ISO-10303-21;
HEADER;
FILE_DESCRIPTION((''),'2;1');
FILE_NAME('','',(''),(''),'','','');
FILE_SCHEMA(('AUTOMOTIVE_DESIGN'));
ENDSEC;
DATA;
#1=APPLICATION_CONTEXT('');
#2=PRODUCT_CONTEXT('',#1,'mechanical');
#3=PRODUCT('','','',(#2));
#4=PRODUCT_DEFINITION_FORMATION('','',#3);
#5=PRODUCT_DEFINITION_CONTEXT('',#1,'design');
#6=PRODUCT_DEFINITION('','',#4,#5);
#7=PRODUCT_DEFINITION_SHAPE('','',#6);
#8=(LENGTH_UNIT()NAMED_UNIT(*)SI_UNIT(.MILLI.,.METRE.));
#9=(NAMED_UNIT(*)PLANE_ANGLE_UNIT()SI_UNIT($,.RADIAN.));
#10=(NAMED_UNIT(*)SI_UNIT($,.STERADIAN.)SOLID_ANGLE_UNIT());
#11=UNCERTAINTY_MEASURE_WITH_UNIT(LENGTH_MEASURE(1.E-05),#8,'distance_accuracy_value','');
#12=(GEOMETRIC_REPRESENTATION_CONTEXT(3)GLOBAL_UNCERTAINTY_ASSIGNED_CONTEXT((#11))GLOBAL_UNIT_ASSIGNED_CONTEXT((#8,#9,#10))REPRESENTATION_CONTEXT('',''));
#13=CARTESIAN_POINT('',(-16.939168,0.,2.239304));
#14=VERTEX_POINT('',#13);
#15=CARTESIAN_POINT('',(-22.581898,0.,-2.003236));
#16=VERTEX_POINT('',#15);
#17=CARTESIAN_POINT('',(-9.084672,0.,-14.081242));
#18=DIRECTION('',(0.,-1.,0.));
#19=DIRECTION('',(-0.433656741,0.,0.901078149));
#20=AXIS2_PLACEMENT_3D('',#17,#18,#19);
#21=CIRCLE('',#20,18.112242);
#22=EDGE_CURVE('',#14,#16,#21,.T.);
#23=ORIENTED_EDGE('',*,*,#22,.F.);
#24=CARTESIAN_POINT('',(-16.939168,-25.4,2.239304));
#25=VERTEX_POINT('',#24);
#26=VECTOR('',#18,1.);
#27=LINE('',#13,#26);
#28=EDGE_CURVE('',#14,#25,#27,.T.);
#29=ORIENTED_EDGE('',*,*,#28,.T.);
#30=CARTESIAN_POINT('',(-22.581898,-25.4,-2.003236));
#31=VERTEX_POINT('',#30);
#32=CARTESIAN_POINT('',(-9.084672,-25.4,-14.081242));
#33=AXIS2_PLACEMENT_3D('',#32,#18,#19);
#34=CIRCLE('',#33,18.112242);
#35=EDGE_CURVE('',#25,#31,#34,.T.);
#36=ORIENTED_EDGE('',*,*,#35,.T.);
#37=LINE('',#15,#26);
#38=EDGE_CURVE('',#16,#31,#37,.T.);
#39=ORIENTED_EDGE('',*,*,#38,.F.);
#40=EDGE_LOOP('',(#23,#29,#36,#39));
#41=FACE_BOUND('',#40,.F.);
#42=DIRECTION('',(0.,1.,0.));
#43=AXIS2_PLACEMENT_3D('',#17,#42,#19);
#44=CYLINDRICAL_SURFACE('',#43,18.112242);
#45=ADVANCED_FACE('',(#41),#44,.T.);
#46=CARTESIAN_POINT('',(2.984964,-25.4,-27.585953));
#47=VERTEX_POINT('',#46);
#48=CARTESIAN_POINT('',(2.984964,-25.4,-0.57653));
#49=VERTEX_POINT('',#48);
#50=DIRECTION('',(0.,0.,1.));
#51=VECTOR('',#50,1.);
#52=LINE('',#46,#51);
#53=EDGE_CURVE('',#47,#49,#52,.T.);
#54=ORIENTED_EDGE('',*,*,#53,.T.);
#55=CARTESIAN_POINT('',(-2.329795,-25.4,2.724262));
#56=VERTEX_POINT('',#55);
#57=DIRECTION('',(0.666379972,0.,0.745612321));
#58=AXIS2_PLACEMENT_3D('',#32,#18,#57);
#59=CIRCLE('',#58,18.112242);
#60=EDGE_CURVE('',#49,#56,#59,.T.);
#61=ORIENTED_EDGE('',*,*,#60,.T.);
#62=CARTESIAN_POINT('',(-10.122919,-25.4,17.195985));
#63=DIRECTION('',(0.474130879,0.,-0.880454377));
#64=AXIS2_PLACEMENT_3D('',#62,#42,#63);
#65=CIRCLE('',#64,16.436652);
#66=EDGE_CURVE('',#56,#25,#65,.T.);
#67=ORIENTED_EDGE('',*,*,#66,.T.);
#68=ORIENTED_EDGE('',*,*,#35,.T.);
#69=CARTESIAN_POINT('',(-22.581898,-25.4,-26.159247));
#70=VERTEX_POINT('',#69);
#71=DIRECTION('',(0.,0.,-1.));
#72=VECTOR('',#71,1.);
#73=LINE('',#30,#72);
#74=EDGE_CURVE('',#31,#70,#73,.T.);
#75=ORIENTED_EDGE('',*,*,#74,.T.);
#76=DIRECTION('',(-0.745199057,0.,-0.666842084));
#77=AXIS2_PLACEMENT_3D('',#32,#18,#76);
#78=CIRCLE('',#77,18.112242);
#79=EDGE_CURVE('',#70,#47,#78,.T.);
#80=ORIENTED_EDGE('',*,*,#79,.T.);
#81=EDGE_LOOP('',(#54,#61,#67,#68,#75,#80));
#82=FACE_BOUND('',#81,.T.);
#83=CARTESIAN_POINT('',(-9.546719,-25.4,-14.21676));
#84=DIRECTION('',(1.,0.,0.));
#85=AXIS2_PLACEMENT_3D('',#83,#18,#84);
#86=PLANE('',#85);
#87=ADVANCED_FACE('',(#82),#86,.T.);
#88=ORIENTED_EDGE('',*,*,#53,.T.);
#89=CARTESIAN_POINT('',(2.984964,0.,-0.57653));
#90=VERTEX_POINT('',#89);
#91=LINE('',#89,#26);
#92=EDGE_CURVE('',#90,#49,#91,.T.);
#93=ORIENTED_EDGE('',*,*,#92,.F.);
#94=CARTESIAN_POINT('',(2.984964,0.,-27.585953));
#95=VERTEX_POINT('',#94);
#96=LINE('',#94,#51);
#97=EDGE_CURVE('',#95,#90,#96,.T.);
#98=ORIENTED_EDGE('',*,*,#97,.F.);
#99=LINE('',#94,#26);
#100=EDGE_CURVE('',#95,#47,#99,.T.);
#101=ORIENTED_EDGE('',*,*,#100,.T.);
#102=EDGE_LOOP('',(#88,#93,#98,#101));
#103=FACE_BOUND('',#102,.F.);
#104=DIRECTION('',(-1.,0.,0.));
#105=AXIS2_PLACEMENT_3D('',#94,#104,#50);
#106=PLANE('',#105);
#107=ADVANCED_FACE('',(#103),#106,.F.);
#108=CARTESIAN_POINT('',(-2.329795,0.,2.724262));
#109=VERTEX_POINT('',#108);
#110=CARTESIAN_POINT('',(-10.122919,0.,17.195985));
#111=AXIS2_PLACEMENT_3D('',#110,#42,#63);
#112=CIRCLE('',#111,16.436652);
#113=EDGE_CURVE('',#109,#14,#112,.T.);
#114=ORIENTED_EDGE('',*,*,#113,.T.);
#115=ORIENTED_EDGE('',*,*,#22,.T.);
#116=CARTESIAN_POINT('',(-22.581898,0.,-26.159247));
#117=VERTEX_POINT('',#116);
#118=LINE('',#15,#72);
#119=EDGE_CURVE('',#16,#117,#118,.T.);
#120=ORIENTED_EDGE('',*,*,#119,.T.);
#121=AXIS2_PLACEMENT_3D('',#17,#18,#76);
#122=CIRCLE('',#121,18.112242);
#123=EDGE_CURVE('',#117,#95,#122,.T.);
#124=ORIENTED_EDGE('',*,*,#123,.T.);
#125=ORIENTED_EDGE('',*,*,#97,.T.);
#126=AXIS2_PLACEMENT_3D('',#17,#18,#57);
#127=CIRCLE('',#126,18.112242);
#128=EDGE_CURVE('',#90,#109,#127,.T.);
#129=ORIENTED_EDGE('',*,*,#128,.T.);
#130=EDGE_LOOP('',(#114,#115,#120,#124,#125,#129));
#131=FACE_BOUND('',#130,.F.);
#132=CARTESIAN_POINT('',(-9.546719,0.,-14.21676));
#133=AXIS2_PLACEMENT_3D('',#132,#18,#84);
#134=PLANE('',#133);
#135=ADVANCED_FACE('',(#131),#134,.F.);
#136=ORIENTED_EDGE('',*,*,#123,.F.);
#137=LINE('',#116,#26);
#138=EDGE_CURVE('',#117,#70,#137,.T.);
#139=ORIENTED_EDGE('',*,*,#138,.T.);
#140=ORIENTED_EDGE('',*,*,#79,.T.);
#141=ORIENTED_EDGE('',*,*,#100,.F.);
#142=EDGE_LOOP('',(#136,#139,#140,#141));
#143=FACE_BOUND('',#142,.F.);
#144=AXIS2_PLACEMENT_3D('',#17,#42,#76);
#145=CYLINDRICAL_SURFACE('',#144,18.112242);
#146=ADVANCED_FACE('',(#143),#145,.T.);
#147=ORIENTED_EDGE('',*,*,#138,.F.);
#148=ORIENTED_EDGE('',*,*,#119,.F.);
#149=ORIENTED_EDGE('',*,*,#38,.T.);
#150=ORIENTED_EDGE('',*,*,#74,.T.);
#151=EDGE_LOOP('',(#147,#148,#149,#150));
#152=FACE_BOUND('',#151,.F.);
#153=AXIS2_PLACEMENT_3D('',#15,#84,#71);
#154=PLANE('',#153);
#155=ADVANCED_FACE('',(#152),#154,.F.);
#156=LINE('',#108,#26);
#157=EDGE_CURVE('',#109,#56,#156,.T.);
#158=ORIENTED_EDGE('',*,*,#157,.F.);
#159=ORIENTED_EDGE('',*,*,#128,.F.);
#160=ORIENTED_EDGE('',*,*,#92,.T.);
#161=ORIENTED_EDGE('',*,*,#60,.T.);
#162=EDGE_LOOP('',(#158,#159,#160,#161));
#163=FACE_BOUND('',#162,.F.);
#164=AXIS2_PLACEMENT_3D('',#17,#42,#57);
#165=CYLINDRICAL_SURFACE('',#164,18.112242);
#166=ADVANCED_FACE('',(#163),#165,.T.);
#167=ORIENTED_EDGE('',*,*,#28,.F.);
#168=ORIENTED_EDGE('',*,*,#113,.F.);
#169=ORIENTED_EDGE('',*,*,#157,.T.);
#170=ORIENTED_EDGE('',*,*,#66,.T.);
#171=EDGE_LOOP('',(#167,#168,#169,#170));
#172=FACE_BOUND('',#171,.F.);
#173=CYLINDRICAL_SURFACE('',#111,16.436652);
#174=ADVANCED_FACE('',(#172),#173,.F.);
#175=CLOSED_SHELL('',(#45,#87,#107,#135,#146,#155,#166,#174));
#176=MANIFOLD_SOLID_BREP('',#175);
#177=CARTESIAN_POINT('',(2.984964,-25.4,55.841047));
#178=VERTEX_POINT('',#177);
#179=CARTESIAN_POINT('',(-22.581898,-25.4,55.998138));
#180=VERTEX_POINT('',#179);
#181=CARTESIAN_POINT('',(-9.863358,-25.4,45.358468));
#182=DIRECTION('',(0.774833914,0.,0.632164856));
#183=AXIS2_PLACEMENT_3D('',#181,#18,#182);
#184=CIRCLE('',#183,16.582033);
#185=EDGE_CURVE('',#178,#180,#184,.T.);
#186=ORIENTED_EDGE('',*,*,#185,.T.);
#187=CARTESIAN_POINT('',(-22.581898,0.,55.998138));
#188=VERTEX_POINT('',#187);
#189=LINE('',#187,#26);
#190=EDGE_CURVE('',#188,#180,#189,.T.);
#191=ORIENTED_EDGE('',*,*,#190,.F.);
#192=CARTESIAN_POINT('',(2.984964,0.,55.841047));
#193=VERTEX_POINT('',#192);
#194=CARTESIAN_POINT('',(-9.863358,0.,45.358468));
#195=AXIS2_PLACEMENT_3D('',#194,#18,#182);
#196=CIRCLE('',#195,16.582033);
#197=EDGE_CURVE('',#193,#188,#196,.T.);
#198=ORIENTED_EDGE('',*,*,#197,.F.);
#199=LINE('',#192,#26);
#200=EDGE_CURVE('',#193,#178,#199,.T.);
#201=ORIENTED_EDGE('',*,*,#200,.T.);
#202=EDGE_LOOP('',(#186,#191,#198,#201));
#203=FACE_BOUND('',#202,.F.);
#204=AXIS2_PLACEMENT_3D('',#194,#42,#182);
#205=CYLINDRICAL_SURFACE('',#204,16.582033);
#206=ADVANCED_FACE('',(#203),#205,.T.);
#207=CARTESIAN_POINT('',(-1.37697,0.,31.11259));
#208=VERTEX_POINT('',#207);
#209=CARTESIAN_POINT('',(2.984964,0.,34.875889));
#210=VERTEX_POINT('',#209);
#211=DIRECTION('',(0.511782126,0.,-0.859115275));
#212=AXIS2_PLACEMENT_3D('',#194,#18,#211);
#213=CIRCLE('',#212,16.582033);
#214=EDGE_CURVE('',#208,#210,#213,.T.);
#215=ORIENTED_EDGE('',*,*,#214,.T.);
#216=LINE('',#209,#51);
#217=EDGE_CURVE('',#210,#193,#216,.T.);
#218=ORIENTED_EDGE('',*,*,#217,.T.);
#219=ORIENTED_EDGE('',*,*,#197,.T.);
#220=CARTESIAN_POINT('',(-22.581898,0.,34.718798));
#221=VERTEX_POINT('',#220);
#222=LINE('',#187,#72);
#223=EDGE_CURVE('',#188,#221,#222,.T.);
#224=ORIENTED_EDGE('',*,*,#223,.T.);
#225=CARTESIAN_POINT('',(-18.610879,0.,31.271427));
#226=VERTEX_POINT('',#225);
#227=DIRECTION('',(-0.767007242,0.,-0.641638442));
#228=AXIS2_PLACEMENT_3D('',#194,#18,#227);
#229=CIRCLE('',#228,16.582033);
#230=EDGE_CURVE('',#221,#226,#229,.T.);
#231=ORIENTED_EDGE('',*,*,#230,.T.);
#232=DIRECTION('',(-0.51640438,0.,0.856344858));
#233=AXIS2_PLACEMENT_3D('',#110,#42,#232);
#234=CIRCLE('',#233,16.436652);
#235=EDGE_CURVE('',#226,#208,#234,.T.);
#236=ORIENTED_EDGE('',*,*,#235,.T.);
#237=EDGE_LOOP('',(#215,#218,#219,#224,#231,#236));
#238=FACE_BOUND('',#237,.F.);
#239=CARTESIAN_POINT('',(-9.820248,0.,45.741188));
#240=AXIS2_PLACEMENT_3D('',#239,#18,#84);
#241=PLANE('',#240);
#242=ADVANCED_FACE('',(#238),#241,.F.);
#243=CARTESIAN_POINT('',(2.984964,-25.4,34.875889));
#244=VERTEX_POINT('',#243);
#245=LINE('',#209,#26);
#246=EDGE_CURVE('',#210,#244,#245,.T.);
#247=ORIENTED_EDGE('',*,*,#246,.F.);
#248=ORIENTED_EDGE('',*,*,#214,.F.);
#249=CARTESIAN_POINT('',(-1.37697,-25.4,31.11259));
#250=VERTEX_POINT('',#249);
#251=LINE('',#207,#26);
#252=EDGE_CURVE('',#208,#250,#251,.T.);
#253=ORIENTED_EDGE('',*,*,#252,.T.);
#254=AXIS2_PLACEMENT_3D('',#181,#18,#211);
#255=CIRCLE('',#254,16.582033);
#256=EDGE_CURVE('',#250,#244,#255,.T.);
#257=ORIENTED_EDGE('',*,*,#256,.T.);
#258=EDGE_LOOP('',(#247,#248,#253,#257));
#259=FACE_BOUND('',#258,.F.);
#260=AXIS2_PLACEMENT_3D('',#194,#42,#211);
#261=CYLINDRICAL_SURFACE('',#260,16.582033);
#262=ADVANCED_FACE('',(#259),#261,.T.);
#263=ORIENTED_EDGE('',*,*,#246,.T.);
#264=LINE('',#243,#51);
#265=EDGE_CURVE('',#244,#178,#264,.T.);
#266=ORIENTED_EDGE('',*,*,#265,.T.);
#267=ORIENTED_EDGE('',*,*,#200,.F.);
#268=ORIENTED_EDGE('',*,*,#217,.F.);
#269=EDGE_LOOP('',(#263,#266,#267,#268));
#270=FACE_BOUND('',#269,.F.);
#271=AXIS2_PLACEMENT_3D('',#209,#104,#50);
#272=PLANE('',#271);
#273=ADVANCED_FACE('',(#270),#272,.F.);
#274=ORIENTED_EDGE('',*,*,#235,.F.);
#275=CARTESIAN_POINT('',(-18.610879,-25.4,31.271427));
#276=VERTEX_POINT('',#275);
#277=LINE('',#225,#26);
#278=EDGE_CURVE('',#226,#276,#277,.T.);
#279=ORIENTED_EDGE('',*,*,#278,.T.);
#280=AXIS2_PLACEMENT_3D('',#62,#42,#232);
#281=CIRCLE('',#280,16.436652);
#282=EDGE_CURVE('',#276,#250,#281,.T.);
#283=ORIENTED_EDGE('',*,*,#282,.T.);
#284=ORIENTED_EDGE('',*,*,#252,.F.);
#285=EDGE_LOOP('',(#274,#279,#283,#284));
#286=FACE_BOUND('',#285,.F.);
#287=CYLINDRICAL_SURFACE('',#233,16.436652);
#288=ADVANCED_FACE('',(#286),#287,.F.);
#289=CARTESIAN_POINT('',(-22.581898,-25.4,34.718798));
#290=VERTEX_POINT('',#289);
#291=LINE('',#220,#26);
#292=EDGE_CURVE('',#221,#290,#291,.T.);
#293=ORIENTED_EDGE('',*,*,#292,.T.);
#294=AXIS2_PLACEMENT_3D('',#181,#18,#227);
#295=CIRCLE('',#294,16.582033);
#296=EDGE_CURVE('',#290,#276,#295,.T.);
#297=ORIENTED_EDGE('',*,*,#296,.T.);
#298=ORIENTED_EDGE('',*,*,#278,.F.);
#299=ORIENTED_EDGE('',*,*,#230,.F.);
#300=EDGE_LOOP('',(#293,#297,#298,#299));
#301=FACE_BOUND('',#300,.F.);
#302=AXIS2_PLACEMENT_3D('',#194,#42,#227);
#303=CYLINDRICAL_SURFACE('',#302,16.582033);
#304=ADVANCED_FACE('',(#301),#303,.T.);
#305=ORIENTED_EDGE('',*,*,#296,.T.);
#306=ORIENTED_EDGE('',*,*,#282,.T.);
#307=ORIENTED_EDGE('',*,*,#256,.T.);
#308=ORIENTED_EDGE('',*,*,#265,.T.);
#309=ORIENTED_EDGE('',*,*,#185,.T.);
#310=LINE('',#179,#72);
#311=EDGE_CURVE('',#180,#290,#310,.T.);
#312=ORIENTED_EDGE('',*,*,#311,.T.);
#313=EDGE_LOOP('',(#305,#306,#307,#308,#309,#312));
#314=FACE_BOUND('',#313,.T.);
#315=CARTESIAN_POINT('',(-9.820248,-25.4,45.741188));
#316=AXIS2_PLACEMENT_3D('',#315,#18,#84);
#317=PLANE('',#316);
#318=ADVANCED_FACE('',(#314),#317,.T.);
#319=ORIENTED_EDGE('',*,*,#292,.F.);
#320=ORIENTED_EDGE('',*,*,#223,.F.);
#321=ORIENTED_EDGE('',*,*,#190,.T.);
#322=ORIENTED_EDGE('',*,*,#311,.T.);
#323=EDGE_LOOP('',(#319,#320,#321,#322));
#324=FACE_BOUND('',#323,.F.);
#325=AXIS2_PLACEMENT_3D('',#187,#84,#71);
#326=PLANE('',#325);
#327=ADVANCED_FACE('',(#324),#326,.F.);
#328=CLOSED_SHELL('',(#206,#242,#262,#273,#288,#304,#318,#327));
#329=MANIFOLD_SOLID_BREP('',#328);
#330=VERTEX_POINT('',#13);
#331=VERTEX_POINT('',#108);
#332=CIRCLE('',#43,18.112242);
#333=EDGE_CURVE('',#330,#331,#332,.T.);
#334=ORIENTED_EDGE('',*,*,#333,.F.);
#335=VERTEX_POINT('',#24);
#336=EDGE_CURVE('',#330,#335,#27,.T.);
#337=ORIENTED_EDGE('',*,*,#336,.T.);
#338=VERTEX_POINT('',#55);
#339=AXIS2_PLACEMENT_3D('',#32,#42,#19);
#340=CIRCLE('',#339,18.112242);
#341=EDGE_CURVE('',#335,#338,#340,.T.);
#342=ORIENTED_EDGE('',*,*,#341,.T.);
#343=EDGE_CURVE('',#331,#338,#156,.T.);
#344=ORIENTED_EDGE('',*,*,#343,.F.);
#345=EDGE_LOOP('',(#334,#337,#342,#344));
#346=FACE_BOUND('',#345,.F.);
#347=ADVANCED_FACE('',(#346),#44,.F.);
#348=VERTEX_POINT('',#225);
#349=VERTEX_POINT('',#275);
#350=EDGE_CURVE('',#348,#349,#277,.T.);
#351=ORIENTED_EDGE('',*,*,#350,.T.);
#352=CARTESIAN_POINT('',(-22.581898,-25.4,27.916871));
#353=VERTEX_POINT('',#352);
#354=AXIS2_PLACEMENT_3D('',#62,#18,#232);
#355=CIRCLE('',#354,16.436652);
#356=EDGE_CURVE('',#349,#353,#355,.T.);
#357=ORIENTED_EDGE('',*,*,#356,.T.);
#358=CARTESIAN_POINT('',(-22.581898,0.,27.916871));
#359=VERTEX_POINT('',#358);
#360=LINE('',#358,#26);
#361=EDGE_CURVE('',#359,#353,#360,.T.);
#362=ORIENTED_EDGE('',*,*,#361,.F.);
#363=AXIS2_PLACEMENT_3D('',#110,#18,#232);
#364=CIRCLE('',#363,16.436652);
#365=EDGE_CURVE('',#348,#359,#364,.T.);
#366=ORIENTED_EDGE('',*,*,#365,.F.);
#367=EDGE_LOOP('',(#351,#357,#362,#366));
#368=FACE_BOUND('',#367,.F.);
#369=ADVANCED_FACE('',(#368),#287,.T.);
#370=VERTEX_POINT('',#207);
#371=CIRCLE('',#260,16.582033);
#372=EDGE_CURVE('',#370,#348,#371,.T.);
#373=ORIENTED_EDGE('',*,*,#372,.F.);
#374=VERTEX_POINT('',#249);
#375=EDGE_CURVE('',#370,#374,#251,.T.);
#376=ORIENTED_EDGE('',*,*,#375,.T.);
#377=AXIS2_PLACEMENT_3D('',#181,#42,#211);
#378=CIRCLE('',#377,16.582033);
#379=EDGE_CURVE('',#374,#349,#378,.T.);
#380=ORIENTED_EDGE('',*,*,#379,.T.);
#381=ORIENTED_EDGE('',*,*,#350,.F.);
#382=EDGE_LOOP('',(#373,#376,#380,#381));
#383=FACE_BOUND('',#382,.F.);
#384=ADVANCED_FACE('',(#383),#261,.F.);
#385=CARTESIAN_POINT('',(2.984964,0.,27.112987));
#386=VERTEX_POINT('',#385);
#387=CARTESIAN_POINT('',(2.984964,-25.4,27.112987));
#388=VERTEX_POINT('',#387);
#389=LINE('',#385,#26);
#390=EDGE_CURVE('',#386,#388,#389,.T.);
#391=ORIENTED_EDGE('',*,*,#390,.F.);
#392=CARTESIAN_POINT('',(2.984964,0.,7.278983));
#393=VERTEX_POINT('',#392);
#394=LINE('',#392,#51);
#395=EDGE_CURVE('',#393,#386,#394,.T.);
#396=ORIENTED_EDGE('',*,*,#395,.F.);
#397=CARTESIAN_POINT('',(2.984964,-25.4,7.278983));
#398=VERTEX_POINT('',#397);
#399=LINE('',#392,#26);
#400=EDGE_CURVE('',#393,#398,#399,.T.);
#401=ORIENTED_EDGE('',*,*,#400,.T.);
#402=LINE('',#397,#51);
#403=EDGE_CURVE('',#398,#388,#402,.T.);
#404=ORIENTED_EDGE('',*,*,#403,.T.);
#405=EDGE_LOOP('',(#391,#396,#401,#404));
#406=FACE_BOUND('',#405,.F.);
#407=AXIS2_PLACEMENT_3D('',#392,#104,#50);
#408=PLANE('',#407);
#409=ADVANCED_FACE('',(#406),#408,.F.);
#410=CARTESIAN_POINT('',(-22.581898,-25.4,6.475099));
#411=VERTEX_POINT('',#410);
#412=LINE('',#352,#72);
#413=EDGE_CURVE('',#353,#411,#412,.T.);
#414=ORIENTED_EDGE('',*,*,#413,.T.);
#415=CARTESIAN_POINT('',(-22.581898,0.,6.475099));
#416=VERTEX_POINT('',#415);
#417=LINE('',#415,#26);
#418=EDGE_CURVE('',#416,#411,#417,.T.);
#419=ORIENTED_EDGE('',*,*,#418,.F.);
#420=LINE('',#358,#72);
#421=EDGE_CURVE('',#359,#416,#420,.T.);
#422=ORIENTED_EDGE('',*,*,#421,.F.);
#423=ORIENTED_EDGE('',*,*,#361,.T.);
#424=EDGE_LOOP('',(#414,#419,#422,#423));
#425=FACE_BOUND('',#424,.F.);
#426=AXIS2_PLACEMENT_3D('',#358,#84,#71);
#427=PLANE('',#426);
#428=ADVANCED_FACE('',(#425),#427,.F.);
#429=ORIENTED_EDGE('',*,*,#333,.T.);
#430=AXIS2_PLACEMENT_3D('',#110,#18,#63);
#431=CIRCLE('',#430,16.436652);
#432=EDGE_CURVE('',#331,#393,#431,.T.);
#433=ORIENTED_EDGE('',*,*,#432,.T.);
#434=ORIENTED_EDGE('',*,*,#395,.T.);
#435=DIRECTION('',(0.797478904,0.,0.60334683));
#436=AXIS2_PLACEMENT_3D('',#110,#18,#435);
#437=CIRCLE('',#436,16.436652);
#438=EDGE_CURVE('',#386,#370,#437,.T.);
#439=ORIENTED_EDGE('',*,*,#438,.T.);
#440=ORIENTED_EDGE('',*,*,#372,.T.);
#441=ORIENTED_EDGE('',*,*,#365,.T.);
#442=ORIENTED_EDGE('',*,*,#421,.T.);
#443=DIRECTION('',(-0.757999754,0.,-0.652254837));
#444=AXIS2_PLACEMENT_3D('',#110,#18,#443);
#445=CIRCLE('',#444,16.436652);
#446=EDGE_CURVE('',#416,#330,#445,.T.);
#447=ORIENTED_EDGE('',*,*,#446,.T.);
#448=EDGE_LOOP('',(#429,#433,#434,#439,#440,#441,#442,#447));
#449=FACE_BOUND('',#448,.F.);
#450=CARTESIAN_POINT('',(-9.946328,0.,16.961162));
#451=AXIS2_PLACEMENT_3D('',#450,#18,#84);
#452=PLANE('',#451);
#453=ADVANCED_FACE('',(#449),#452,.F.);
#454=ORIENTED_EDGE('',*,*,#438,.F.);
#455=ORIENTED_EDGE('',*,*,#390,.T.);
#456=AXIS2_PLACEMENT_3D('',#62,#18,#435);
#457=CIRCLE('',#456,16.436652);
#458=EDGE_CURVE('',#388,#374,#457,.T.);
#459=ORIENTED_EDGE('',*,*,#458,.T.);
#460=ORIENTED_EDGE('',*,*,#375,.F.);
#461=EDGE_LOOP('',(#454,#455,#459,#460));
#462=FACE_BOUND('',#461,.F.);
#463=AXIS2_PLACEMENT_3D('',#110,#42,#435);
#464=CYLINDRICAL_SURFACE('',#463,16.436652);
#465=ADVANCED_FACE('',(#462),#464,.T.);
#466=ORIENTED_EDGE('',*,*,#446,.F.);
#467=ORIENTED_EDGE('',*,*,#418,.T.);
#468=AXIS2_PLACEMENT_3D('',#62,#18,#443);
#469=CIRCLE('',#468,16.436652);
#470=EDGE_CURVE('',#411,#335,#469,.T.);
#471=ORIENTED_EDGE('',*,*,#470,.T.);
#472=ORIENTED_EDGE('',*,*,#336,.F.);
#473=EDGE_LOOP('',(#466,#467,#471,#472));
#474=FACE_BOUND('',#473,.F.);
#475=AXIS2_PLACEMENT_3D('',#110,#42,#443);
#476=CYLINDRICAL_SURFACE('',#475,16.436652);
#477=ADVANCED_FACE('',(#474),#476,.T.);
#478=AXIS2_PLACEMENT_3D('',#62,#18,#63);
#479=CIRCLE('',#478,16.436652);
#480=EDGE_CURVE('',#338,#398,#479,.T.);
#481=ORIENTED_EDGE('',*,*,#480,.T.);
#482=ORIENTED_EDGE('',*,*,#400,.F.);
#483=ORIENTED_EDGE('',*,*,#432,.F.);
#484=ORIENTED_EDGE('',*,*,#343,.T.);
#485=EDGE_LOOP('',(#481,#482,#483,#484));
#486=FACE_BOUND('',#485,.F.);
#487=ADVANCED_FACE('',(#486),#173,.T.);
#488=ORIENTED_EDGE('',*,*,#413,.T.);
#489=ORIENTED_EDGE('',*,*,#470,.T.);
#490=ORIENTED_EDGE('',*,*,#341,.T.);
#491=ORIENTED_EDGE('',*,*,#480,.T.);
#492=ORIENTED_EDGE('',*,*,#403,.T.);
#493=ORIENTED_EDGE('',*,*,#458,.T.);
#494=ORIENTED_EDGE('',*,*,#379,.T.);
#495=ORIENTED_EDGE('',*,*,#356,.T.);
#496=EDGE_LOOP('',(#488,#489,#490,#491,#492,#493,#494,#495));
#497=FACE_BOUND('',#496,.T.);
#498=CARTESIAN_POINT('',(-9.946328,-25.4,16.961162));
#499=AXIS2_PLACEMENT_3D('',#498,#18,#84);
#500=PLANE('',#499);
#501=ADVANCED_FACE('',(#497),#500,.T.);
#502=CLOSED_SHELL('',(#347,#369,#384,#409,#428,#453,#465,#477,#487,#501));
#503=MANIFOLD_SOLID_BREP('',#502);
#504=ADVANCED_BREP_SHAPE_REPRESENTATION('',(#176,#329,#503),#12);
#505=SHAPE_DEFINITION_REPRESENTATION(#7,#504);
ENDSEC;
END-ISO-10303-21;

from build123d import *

# Parameters (mm, degrees)
F1_DEPTH = 25.4


with BuildPart() as f1:
    # F0 (on Front) → F1 (new body)
    with BuildSketch(Plane.XZ):
        with BuildLine():
            ThreePointArc((2.9849638231, 55.841046589), (-9.7614743803, 61.9401882116), (-22.581897676, 55.9981378983))
            Line((-22.581897676, 55.9981378983), (-22.581897676, 34.7187977959))
            ThreePointArc((-22.581897676, 34.7187977959), (-20.7339157895, 32.8366946633), (-18.6108785729, 31.2714272002))
            ThreePointArc((-18.6108785729, 31.2714272002), (-9.9714363538, 33.6319387195), (-1.3769697054, 31.1125896929))
            ThreePointArc((-1.3769697054, 31.1125896929), (0.9686810311, 32.8033588814), (2.9849638231, 34.8758891053))
            Line((2.9849638231, 34.8758891053), (2.9849638231, 55.841046589))
        make_face()
    extrude(amount=F1_DEPTH)


with BuildPart() as f1b:
    # F0 (on Front) → F1, piece 2 (new body)
    with BuildSketch(Plane.XZ):
        with BuildLine():
            ThreePointArc((-18.6108785729, 31.2714272002), (-20.7298421272, 29.7521275364), (-22.581897676, 27.9168705362))
            Line((-22.581897676, 27.9168705362), (-22.581897676, 6.4750989062))
            ThreePointArc((-22.581897676, 6.4750989062), (-19.9904965776, 4.0508543415), (-16.9391677392, 2.2393042641))
            ThreePointArc((-16.9391677392, 2.2393042641), (-9.6855767528, 4.0210300271), (-2.3297951619, 2.7242624769))
            ThreePointArc((-2.3297951619, 2.7242624769), (0.5728460014, 4.7154345625), (2.9849638231, 7.2789828089))
            Line((2.9849638231, 7.2789828089), (2.9849638231, 27.1129866335))
            ThreePointArc((2.9849638231, 27.1129866335), (0.9854877512, 29.3107203891), (-1.3769697054, 31.1125896929))
            ThreePointArc((-1.3769697054, 31.1125896929), (-10.0161809522, 28.7771387188), (-18.6108785729, 31.2714272002))
        make_face()
    extrude(amount=F1_DEPTH)


with BuildPart() as f1c:
    # F0 (on Front) → F1, piece 3 (new body)
    with BuildSketch(Plane.XZ):
        with BuildLine():
            ThreePointArc((-16.9391677392, 2.2393042641), (-19.9692385493, 0.3956202808), (-22.581897676, -2.00323612))
            Line((-22.581897676, -2.00323612), (-22.581897676, -26.1592470059))
            ThreePointArc((-22.581897676, -26.1592470059), (-10.0938178152, -32.1653491647), (2.9849638231, -27.5859526312))
            Line((2.9849638231, -27.5859526312), (2.9849638231, -0.5765304947))
            ThreePointArc((2.9849638231, -0.5765304947), (0.4711836848, 1.3050819337), (-2.3297951619, 2.7242624769))
            ThreePointArc((-2.3297951619, 2.7242624769), (-9.5776050492, 0.7683810261), (-16.9391677392, 2.2393042641))
        make_face()
    extrude(amount=F1_DEPTH)


solid = Compound([f1.part, f1b.part, f1c.part])
